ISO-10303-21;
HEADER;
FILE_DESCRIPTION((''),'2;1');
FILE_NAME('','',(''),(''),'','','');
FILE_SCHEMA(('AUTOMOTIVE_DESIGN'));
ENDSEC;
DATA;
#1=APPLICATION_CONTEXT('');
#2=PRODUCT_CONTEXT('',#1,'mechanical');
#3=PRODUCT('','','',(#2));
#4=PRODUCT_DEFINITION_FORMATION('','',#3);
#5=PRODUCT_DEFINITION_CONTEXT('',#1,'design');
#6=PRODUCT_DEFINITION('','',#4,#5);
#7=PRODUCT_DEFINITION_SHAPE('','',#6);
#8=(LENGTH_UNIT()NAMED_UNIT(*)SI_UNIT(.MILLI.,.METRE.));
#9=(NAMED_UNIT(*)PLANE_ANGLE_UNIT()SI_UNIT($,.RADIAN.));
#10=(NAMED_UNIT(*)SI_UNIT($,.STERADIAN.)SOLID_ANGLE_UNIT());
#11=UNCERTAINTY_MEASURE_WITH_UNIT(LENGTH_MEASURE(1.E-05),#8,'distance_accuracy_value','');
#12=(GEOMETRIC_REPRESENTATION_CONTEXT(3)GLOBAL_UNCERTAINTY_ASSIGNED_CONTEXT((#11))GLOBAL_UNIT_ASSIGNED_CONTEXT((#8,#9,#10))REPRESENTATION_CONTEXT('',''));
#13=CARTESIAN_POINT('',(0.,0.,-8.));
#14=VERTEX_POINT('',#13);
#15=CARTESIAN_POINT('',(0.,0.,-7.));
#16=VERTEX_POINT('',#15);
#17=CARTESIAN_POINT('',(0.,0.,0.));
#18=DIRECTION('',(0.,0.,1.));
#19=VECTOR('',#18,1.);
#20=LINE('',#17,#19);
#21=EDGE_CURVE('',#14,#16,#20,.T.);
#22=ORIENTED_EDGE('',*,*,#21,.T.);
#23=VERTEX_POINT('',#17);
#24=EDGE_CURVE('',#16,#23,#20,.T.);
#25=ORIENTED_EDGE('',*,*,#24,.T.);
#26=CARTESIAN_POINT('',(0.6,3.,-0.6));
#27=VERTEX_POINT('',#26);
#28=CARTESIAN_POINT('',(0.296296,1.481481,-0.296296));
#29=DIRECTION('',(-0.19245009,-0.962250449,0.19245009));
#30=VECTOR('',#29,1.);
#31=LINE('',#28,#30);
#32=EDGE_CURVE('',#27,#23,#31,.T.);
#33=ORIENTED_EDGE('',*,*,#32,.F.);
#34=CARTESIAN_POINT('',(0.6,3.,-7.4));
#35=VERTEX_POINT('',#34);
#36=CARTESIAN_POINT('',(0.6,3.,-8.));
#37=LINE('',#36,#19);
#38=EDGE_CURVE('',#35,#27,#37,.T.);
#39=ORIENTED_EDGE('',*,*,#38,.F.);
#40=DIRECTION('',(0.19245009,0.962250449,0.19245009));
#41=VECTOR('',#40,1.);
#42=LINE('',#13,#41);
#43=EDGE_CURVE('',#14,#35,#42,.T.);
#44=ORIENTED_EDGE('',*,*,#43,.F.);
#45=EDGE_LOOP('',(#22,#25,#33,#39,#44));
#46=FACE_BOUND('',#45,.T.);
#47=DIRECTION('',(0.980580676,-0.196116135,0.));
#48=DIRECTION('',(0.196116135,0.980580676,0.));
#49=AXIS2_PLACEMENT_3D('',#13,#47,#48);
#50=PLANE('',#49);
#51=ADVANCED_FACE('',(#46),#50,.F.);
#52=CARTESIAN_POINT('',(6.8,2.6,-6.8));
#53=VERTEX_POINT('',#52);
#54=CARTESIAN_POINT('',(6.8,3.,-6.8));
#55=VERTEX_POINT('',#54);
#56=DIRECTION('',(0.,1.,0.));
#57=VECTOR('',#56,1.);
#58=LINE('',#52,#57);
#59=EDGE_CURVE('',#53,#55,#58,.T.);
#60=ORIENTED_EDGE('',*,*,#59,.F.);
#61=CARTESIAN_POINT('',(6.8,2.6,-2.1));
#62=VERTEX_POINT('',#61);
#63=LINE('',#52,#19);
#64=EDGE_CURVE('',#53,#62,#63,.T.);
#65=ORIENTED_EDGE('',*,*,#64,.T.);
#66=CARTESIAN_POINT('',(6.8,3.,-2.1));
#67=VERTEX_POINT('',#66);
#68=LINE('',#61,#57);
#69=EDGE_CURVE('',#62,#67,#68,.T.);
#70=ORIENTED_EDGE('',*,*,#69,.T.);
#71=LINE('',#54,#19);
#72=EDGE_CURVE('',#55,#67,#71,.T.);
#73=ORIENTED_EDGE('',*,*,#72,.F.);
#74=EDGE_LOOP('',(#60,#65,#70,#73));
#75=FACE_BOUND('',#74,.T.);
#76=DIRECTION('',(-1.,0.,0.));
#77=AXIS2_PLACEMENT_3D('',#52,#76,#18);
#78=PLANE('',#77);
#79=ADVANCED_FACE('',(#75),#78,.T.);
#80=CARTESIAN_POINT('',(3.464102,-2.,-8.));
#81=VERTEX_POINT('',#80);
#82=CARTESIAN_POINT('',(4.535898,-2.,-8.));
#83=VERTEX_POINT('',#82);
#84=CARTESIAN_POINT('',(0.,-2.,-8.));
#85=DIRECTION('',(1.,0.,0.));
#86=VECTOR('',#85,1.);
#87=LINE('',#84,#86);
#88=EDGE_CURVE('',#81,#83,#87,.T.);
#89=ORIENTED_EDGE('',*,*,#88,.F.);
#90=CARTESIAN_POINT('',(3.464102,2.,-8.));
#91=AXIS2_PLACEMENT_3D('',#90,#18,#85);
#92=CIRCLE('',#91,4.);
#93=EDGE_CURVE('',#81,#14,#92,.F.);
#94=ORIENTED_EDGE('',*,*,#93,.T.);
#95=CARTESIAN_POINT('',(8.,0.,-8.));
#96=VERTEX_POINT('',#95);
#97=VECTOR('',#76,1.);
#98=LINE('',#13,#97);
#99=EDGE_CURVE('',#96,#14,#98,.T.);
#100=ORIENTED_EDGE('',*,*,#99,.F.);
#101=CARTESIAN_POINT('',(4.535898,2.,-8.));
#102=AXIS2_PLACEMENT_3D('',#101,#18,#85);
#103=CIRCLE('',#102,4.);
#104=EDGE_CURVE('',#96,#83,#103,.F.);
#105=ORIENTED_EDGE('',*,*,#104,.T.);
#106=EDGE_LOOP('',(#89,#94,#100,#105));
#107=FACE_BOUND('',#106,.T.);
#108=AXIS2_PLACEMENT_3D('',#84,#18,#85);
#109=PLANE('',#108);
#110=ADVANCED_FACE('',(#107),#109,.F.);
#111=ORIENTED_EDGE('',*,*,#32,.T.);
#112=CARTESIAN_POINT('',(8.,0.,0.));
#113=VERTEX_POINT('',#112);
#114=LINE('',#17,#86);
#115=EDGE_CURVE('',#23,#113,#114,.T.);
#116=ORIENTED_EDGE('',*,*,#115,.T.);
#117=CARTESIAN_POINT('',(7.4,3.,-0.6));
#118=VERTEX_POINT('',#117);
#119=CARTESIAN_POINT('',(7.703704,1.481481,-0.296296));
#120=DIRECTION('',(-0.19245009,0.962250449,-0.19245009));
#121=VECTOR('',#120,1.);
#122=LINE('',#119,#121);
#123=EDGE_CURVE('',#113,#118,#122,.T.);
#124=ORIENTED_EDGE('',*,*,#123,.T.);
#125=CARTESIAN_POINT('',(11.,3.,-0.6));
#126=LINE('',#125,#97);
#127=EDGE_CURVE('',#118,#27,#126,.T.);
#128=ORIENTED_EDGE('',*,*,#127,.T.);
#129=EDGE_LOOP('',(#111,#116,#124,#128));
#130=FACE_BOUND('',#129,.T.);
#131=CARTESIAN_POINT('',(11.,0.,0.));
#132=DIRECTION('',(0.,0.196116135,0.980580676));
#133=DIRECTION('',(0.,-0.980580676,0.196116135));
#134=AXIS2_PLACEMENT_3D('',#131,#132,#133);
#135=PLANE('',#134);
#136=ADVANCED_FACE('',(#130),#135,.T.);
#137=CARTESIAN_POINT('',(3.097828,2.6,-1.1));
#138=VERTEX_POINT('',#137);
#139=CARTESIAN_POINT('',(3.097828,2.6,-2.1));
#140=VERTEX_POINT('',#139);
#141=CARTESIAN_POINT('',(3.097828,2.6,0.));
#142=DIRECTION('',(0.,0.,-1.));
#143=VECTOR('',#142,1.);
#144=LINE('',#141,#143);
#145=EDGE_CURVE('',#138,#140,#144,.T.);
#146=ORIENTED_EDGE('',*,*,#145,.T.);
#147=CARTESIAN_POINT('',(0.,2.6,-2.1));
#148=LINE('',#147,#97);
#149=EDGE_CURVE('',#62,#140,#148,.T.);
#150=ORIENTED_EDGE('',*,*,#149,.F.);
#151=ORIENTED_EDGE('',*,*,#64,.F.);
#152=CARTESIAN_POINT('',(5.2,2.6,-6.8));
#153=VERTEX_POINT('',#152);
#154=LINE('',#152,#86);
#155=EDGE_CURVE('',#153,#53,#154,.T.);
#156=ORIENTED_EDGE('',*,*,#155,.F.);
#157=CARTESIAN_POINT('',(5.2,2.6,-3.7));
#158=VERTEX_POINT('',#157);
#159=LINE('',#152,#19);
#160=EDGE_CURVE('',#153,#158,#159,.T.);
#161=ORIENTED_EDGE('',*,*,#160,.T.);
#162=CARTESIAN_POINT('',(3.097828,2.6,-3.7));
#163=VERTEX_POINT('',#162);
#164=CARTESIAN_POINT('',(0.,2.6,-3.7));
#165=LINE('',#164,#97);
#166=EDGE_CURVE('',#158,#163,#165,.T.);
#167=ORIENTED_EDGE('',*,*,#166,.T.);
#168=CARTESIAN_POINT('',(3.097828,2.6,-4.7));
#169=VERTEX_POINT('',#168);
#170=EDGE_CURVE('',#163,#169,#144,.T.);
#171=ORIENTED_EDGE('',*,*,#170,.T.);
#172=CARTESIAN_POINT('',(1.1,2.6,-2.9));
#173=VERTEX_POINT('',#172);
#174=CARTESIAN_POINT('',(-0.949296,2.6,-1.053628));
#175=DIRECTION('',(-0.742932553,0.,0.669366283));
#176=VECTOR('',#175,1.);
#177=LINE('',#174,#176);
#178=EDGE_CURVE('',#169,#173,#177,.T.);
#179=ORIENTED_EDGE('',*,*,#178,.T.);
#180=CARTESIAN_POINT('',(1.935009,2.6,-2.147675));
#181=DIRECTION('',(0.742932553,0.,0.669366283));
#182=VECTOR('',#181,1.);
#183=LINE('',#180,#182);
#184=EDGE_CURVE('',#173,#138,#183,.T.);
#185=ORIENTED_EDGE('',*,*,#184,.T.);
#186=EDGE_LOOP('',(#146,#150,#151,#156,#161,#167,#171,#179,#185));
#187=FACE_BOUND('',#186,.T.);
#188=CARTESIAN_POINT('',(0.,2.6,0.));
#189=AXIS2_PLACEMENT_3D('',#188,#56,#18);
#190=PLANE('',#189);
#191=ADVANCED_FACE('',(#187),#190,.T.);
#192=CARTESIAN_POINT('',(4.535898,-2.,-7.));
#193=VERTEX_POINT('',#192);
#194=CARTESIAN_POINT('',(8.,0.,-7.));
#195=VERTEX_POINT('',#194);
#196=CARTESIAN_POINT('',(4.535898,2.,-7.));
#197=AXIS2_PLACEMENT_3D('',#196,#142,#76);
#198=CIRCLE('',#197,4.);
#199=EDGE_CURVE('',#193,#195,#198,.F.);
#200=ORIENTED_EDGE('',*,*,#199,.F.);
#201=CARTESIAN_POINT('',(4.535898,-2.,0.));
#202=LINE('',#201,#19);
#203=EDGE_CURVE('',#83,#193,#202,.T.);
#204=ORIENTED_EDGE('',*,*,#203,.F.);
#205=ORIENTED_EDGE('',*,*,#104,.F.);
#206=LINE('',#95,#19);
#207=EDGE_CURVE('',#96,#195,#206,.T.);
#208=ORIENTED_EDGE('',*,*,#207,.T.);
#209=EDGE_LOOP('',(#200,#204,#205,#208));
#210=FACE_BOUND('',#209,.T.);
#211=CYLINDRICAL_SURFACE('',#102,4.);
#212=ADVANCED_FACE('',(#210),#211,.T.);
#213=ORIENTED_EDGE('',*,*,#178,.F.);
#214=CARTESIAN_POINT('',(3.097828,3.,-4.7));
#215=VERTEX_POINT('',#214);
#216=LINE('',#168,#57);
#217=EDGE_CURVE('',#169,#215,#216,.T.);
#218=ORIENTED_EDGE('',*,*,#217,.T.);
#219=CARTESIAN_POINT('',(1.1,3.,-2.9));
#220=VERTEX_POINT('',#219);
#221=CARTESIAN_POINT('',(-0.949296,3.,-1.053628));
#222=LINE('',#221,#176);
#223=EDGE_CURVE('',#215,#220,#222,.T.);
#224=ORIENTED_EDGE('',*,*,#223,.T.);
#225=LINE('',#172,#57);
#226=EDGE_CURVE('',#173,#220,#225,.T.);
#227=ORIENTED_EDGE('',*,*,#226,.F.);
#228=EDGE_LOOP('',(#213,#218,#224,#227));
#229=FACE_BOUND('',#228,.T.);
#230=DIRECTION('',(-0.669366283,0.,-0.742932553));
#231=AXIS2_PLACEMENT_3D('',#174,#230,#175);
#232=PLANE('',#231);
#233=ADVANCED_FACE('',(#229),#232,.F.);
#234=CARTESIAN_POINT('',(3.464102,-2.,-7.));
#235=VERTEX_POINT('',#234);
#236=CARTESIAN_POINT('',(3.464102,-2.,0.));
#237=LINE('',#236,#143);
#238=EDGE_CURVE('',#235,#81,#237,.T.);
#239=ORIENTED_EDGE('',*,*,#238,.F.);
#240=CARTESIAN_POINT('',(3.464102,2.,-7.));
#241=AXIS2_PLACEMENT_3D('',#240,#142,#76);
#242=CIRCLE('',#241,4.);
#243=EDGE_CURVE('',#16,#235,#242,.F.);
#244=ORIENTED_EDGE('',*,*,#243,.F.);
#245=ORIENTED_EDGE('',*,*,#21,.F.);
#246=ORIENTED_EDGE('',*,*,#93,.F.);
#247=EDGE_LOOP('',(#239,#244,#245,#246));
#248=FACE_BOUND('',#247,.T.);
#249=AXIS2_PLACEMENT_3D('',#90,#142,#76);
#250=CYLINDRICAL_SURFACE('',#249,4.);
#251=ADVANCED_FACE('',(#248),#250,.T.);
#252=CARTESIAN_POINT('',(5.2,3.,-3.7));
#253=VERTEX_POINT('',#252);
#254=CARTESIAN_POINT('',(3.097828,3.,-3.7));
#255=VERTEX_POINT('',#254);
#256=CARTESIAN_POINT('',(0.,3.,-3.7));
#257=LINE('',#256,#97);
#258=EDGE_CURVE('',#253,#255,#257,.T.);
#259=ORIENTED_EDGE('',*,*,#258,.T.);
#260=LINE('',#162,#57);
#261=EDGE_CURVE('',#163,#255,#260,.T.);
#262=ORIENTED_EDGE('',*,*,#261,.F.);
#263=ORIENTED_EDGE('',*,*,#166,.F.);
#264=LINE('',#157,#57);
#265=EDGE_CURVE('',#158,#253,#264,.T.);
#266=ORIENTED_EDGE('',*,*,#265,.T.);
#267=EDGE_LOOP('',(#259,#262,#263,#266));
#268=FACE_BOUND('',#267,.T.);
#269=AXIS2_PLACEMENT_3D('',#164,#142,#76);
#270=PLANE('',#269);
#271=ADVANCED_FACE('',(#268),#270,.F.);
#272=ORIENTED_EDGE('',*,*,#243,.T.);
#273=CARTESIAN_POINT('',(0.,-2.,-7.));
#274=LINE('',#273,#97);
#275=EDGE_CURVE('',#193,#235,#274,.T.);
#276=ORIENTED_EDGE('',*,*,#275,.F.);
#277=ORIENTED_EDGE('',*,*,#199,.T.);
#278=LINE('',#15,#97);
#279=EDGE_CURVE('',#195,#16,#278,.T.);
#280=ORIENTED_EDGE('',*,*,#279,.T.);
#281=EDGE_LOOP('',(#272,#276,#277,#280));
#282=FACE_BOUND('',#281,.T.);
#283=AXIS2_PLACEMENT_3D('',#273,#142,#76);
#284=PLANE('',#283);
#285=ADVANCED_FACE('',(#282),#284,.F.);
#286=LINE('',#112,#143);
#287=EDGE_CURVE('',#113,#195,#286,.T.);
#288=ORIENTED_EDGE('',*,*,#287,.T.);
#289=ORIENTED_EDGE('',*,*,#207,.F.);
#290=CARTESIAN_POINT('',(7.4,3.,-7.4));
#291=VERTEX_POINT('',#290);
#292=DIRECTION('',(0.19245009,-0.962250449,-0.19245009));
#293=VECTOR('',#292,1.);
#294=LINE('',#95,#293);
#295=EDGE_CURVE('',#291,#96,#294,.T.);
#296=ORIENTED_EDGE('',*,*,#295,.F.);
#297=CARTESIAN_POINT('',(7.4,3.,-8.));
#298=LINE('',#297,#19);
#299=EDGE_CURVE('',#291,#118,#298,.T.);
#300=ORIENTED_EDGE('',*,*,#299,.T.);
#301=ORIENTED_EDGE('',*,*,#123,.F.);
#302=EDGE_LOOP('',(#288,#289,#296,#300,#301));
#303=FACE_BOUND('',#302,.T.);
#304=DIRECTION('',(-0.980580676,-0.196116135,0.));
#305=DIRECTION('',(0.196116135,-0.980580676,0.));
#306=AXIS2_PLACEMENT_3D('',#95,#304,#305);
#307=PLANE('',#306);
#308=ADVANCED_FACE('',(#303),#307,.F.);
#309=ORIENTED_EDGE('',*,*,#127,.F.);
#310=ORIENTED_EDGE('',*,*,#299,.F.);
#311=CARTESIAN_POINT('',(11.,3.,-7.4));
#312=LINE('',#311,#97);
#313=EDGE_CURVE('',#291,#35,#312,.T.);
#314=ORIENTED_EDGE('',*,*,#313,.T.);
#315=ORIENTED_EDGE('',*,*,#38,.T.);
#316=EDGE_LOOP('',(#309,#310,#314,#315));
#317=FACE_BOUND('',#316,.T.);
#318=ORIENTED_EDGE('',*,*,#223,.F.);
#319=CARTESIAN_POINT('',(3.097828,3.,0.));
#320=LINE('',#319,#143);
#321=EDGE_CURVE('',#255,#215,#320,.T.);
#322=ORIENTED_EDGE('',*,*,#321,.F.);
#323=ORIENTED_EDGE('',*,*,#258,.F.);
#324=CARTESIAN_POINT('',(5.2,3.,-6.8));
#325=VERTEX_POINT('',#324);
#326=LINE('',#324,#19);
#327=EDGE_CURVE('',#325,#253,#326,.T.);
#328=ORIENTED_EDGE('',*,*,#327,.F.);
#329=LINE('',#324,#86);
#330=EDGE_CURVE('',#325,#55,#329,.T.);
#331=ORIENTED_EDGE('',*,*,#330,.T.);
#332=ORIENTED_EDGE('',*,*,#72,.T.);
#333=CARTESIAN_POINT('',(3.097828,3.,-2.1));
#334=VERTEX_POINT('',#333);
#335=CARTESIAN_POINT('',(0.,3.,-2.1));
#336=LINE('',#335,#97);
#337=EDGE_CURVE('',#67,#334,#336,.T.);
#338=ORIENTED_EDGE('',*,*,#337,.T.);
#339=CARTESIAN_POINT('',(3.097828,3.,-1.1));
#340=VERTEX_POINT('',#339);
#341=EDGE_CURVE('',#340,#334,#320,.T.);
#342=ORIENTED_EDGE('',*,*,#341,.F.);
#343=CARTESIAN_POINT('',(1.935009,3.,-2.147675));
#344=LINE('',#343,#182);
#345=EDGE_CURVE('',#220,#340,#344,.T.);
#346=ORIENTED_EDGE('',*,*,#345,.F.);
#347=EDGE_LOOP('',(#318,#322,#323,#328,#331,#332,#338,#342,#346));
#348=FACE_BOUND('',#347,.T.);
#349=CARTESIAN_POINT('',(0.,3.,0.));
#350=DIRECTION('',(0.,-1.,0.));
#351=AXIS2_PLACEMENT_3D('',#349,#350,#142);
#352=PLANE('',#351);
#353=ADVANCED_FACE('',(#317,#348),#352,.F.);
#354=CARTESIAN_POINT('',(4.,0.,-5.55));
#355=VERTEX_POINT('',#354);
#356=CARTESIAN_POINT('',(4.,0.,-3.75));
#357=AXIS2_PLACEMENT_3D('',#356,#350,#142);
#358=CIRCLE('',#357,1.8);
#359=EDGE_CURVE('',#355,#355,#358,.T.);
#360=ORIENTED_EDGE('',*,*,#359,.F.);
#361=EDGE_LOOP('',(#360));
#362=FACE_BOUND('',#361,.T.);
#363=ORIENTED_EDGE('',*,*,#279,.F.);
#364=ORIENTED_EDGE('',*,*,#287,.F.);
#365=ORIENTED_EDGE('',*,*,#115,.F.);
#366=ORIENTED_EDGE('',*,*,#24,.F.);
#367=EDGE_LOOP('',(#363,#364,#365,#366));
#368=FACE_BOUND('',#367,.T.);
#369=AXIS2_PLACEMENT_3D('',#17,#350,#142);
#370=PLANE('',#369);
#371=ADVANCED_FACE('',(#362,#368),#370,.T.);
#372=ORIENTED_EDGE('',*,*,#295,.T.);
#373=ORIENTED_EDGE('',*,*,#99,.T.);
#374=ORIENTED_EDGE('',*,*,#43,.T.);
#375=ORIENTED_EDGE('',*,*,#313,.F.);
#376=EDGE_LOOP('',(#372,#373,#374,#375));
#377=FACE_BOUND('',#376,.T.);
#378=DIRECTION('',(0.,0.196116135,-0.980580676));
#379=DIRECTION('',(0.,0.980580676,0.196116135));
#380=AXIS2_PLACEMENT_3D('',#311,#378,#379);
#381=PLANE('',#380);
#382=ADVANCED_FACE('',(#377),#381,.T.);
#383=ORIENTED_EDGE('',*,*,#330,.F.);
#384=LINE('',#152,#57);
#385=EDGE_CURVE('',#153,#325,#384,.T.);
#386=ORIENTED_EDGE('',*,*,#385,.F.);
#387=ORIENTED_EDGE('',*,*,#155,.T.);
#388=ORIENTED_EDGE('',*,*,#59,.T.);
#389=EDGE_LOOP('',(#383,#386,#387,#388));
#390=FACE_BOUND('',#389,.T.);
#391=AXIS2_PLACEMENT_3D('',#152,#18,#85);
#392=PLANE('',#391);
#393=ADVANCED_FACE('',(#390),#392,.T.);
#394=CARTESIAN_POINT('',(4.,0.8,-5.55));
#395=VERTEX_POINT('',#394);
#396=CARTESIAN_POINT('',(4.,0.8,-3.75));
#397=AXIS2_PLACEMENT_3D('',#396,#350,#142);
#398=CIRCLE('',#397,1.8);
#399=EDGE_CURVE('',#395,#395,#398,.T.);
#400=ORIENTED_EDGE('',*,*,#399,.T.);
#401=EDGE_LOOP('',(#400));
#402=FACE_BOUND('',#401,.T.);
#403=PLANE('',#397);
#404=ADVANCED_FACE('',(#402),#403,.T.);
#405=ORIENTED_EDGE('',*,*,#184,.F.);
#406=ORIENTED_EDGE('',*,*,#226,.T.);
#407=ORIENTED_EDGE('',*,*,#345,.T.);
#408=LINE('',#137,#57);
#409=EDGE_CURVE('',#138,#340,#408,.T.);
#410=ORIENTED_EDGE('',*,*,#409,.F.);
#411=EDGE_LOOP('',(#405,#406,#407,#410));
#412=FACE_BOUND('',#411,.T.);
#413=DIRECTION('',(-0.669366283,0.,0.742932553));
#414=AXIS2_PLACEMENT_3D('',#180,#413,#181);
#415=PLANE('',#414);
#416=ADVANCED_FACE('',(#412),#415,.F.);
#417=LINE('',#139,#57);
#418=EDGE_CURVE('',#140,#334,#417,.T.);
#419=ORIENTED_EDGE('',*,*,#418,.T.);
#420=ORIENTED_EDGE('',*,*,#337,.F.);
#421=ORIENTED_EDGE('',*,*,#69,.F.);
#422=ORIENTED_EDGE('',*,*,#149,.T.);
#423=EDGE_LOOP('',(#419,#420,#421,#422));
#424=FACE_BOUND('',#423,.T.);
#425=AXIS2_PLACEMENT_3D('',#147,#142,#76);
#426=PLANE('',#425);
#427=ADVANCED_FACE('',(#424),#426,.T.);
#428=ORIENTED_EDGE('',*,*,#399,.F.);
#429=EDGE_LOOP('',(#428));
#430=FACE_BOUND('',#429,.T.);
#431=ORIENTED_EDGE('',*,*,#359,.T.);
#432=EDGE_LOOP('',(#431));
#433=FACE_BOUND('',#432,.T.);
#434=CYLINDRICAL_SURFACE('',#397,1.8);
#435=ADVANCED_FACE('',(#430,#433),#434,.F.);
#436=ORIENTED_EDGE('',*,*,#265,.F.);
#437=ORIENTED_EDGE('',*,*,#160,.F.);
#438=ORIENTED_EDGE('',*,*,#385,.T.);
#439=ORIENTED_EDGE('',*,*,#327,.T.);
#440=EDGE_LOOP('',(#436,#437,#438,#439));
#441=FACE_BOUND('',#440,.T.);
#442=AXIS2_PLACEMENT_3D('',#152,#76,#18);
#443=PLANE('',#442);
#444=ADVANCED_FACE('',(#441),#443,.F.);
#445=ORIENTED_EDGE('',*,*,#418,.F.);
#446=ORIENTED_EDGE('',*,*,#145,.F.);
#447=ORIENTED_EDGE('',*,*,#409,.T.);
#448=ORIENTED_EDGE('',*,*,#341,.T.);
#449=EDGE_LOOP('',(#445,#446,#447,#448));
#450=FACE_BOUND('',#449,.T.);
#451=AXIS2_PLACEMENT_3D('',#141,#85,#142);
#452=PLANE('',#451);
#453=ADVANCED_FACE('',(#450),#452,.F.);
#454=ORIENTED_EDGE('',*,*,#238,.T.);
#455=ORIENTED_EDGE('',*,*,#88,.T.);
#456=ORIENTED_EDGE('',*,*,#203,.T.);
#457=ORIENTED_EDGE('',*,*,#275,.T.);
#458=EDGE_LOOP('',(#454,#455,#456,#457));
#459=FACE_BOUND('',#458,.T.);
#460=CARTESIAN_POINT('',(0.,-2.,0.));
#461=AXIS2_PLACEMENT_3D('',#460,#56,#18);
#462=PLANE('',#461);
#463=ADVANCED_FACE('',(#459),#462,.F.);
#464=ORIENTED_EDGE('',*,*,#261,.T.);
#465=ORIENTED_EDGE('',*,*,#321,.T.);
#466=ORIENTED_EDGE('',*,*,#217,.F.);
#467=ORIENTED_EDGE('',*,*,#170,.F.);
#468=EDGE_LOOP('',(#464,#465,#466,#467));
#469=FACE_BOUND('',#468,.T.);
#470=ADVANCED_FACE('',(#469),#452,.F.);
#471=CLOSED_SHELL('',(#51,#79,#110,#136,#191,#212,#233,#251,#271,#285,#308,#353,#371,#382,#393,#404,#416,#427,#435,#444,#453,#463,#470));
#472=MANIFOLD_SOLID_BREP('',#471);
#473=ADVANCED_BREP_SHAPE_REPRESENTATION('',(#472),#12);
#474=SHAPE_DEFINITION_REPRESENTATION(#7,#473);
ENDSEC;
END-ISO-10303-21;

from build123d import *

# Parameters (mm, degrees)
SKETCH1_W               = 8
SKETCH1_H               = 8
BOSS_EXTRUDE1_DEPTH     = 3
CUT_EXTRUDE1_DEPTH      = 12.704699911
CUT_EXTRUDE1_DEPTH_BACK = 12.704699911
CUT_EXTRUDE2_DEPTH      = 11
SKETCH4_R               = 1.8
CUT_EXTRUDE3_DEPTH      = 0.8
SKETCH5_W               = 8
SKETCH5_H               = 1
BOSS_EXTRUDE2_DEPTH     = 2
FILLET1_R               = 4
SKETCH6_W               = 2.10217216
SKETCH6_H               = 1.6
CUT_EXTRUDE4_DEPTH      = 0.4


with BuildPart() as part:
    # Sketch1 → Boss-Extrude1 (new body)
    with BuildSketch(Plane(origin=(0, 0, 0), x_dir=(1, 0, 0), z_dir=(0, 1, 0))):
        with Locations((4, 4)):
            Rectangle(SKETCH1_W, SKETCH1_H)
    extrude(amount=BOSS_EXTRUDE1_DEPTH)

    # Sketch2 → Cut-Extrude1 (cut, two sides: drawn at the far end of the back side and taken through both)
    with BuildSketch(Plane.XY.offset(-CUT_EXTRUDE1_DEPTH_BACK)):
        Polygon((0, 0), (0.6, 3), (0, 3), align=None)
        Polygon((8, 0), (7.4, 3), (8, 3), align=None)
    extrude(amount=CUT_EXTRUDE1_DEPTH + CUT_EXTRUDE1_DEPTH_BACK, mode=Mode.SUBTRACT)

    # Sketch3 → Cut-Extrude2 (cut)
    with BuildSketch(Plane(origin=(0, 0, 0), x_dir=(0, 0, -1), z_dir=(1, 0, 0))):
        Polygon((0, 0), (0.6, 3), (0, 3), align=None)
        Polygon((8, 3), (7.4, 3), (8, 0), align=None)
    extrude(amount=CUT_EXTRUDE2_DEPTH, mode=Mode.SUBTRACT)

    # Sketch4 → Cut-Extrude3 (cut)
    with BuildSketch(Plane.XZ):
        with Locations(Location((4, -3.75, 0), (0, 0, 270))):
            Circle(SKETCH4_R)
    extrude(amount=-CUT_EXTRUDE3_DEPTH, mode=Mode.SUBTRACT)

    # Sketch5 → Boss-Extrude2 (add)
    with BuildSketch(Plane.XZ):
        with Locations((4, -7.5)):
            Rectangle(SKETCH5_W, SKETCH5_H)
    extrude(amount=BOSS_EXTRUDE2_DEPTH)

    # Fillet1
    # the kernel refuses this fillet: 4 mm, written as the material it takes off along each edge
    with BuildSketch(Plane(origin=(8, -2, -16.660254038), x_dir=(0, 1, 0), z_dir=(0, 0, 1)), Plane(origin=(0, -2, 1.660254038), x_dir=(0, 1, 0), z_dir=(0, 0, -1))) as fillet1_piece_1:
        with BuildLine():
            CenterArc((4, 3.464101615), FILLET1_R, 180, 60)
            Line((0, 3.464101615), (-0.08, 3.464101615))
            Line((-0.08, 3.464101615), (-0.08, 0))
            Line((-0.08, 0), (0, -0.08))
            ThreePointArc((0, -0.08), (1, -0.08), (1.96, -0.069282032))
            Line((1.96, -0.069282032), (2, 0))
        make_face()
    extrude(amount=18.320508076, mode=Mode.SUBTRACT)

    # Sketch6 → Cut-Extrude4 (cut)
    with BuildSketch(Plane(origin=(0, 3, 0), x_dir=(1, 0, 0), z_dir=(0, 1, 0))):
        Polygon((3.09782784, 2.1), (3.09782784, 3.7), (3.09782784, 4.7), (1.1, 2.9), (3.09782784, 1.1), align=None)
        with Locations((4.14891392, 2.9)):
            Rectangle(SKETCH6_W, SKETCH6_H)
        Polygon((5.2, 6.8), (5.2, 3.7), (5.2, 2.1), (6.8, 2.1), (6.8, 6.8), align=None)
    extrude(amount=-CUT_EXTRUDE4_DEPTH, mode=Mode.SUBTRACT)


solid = part.part
